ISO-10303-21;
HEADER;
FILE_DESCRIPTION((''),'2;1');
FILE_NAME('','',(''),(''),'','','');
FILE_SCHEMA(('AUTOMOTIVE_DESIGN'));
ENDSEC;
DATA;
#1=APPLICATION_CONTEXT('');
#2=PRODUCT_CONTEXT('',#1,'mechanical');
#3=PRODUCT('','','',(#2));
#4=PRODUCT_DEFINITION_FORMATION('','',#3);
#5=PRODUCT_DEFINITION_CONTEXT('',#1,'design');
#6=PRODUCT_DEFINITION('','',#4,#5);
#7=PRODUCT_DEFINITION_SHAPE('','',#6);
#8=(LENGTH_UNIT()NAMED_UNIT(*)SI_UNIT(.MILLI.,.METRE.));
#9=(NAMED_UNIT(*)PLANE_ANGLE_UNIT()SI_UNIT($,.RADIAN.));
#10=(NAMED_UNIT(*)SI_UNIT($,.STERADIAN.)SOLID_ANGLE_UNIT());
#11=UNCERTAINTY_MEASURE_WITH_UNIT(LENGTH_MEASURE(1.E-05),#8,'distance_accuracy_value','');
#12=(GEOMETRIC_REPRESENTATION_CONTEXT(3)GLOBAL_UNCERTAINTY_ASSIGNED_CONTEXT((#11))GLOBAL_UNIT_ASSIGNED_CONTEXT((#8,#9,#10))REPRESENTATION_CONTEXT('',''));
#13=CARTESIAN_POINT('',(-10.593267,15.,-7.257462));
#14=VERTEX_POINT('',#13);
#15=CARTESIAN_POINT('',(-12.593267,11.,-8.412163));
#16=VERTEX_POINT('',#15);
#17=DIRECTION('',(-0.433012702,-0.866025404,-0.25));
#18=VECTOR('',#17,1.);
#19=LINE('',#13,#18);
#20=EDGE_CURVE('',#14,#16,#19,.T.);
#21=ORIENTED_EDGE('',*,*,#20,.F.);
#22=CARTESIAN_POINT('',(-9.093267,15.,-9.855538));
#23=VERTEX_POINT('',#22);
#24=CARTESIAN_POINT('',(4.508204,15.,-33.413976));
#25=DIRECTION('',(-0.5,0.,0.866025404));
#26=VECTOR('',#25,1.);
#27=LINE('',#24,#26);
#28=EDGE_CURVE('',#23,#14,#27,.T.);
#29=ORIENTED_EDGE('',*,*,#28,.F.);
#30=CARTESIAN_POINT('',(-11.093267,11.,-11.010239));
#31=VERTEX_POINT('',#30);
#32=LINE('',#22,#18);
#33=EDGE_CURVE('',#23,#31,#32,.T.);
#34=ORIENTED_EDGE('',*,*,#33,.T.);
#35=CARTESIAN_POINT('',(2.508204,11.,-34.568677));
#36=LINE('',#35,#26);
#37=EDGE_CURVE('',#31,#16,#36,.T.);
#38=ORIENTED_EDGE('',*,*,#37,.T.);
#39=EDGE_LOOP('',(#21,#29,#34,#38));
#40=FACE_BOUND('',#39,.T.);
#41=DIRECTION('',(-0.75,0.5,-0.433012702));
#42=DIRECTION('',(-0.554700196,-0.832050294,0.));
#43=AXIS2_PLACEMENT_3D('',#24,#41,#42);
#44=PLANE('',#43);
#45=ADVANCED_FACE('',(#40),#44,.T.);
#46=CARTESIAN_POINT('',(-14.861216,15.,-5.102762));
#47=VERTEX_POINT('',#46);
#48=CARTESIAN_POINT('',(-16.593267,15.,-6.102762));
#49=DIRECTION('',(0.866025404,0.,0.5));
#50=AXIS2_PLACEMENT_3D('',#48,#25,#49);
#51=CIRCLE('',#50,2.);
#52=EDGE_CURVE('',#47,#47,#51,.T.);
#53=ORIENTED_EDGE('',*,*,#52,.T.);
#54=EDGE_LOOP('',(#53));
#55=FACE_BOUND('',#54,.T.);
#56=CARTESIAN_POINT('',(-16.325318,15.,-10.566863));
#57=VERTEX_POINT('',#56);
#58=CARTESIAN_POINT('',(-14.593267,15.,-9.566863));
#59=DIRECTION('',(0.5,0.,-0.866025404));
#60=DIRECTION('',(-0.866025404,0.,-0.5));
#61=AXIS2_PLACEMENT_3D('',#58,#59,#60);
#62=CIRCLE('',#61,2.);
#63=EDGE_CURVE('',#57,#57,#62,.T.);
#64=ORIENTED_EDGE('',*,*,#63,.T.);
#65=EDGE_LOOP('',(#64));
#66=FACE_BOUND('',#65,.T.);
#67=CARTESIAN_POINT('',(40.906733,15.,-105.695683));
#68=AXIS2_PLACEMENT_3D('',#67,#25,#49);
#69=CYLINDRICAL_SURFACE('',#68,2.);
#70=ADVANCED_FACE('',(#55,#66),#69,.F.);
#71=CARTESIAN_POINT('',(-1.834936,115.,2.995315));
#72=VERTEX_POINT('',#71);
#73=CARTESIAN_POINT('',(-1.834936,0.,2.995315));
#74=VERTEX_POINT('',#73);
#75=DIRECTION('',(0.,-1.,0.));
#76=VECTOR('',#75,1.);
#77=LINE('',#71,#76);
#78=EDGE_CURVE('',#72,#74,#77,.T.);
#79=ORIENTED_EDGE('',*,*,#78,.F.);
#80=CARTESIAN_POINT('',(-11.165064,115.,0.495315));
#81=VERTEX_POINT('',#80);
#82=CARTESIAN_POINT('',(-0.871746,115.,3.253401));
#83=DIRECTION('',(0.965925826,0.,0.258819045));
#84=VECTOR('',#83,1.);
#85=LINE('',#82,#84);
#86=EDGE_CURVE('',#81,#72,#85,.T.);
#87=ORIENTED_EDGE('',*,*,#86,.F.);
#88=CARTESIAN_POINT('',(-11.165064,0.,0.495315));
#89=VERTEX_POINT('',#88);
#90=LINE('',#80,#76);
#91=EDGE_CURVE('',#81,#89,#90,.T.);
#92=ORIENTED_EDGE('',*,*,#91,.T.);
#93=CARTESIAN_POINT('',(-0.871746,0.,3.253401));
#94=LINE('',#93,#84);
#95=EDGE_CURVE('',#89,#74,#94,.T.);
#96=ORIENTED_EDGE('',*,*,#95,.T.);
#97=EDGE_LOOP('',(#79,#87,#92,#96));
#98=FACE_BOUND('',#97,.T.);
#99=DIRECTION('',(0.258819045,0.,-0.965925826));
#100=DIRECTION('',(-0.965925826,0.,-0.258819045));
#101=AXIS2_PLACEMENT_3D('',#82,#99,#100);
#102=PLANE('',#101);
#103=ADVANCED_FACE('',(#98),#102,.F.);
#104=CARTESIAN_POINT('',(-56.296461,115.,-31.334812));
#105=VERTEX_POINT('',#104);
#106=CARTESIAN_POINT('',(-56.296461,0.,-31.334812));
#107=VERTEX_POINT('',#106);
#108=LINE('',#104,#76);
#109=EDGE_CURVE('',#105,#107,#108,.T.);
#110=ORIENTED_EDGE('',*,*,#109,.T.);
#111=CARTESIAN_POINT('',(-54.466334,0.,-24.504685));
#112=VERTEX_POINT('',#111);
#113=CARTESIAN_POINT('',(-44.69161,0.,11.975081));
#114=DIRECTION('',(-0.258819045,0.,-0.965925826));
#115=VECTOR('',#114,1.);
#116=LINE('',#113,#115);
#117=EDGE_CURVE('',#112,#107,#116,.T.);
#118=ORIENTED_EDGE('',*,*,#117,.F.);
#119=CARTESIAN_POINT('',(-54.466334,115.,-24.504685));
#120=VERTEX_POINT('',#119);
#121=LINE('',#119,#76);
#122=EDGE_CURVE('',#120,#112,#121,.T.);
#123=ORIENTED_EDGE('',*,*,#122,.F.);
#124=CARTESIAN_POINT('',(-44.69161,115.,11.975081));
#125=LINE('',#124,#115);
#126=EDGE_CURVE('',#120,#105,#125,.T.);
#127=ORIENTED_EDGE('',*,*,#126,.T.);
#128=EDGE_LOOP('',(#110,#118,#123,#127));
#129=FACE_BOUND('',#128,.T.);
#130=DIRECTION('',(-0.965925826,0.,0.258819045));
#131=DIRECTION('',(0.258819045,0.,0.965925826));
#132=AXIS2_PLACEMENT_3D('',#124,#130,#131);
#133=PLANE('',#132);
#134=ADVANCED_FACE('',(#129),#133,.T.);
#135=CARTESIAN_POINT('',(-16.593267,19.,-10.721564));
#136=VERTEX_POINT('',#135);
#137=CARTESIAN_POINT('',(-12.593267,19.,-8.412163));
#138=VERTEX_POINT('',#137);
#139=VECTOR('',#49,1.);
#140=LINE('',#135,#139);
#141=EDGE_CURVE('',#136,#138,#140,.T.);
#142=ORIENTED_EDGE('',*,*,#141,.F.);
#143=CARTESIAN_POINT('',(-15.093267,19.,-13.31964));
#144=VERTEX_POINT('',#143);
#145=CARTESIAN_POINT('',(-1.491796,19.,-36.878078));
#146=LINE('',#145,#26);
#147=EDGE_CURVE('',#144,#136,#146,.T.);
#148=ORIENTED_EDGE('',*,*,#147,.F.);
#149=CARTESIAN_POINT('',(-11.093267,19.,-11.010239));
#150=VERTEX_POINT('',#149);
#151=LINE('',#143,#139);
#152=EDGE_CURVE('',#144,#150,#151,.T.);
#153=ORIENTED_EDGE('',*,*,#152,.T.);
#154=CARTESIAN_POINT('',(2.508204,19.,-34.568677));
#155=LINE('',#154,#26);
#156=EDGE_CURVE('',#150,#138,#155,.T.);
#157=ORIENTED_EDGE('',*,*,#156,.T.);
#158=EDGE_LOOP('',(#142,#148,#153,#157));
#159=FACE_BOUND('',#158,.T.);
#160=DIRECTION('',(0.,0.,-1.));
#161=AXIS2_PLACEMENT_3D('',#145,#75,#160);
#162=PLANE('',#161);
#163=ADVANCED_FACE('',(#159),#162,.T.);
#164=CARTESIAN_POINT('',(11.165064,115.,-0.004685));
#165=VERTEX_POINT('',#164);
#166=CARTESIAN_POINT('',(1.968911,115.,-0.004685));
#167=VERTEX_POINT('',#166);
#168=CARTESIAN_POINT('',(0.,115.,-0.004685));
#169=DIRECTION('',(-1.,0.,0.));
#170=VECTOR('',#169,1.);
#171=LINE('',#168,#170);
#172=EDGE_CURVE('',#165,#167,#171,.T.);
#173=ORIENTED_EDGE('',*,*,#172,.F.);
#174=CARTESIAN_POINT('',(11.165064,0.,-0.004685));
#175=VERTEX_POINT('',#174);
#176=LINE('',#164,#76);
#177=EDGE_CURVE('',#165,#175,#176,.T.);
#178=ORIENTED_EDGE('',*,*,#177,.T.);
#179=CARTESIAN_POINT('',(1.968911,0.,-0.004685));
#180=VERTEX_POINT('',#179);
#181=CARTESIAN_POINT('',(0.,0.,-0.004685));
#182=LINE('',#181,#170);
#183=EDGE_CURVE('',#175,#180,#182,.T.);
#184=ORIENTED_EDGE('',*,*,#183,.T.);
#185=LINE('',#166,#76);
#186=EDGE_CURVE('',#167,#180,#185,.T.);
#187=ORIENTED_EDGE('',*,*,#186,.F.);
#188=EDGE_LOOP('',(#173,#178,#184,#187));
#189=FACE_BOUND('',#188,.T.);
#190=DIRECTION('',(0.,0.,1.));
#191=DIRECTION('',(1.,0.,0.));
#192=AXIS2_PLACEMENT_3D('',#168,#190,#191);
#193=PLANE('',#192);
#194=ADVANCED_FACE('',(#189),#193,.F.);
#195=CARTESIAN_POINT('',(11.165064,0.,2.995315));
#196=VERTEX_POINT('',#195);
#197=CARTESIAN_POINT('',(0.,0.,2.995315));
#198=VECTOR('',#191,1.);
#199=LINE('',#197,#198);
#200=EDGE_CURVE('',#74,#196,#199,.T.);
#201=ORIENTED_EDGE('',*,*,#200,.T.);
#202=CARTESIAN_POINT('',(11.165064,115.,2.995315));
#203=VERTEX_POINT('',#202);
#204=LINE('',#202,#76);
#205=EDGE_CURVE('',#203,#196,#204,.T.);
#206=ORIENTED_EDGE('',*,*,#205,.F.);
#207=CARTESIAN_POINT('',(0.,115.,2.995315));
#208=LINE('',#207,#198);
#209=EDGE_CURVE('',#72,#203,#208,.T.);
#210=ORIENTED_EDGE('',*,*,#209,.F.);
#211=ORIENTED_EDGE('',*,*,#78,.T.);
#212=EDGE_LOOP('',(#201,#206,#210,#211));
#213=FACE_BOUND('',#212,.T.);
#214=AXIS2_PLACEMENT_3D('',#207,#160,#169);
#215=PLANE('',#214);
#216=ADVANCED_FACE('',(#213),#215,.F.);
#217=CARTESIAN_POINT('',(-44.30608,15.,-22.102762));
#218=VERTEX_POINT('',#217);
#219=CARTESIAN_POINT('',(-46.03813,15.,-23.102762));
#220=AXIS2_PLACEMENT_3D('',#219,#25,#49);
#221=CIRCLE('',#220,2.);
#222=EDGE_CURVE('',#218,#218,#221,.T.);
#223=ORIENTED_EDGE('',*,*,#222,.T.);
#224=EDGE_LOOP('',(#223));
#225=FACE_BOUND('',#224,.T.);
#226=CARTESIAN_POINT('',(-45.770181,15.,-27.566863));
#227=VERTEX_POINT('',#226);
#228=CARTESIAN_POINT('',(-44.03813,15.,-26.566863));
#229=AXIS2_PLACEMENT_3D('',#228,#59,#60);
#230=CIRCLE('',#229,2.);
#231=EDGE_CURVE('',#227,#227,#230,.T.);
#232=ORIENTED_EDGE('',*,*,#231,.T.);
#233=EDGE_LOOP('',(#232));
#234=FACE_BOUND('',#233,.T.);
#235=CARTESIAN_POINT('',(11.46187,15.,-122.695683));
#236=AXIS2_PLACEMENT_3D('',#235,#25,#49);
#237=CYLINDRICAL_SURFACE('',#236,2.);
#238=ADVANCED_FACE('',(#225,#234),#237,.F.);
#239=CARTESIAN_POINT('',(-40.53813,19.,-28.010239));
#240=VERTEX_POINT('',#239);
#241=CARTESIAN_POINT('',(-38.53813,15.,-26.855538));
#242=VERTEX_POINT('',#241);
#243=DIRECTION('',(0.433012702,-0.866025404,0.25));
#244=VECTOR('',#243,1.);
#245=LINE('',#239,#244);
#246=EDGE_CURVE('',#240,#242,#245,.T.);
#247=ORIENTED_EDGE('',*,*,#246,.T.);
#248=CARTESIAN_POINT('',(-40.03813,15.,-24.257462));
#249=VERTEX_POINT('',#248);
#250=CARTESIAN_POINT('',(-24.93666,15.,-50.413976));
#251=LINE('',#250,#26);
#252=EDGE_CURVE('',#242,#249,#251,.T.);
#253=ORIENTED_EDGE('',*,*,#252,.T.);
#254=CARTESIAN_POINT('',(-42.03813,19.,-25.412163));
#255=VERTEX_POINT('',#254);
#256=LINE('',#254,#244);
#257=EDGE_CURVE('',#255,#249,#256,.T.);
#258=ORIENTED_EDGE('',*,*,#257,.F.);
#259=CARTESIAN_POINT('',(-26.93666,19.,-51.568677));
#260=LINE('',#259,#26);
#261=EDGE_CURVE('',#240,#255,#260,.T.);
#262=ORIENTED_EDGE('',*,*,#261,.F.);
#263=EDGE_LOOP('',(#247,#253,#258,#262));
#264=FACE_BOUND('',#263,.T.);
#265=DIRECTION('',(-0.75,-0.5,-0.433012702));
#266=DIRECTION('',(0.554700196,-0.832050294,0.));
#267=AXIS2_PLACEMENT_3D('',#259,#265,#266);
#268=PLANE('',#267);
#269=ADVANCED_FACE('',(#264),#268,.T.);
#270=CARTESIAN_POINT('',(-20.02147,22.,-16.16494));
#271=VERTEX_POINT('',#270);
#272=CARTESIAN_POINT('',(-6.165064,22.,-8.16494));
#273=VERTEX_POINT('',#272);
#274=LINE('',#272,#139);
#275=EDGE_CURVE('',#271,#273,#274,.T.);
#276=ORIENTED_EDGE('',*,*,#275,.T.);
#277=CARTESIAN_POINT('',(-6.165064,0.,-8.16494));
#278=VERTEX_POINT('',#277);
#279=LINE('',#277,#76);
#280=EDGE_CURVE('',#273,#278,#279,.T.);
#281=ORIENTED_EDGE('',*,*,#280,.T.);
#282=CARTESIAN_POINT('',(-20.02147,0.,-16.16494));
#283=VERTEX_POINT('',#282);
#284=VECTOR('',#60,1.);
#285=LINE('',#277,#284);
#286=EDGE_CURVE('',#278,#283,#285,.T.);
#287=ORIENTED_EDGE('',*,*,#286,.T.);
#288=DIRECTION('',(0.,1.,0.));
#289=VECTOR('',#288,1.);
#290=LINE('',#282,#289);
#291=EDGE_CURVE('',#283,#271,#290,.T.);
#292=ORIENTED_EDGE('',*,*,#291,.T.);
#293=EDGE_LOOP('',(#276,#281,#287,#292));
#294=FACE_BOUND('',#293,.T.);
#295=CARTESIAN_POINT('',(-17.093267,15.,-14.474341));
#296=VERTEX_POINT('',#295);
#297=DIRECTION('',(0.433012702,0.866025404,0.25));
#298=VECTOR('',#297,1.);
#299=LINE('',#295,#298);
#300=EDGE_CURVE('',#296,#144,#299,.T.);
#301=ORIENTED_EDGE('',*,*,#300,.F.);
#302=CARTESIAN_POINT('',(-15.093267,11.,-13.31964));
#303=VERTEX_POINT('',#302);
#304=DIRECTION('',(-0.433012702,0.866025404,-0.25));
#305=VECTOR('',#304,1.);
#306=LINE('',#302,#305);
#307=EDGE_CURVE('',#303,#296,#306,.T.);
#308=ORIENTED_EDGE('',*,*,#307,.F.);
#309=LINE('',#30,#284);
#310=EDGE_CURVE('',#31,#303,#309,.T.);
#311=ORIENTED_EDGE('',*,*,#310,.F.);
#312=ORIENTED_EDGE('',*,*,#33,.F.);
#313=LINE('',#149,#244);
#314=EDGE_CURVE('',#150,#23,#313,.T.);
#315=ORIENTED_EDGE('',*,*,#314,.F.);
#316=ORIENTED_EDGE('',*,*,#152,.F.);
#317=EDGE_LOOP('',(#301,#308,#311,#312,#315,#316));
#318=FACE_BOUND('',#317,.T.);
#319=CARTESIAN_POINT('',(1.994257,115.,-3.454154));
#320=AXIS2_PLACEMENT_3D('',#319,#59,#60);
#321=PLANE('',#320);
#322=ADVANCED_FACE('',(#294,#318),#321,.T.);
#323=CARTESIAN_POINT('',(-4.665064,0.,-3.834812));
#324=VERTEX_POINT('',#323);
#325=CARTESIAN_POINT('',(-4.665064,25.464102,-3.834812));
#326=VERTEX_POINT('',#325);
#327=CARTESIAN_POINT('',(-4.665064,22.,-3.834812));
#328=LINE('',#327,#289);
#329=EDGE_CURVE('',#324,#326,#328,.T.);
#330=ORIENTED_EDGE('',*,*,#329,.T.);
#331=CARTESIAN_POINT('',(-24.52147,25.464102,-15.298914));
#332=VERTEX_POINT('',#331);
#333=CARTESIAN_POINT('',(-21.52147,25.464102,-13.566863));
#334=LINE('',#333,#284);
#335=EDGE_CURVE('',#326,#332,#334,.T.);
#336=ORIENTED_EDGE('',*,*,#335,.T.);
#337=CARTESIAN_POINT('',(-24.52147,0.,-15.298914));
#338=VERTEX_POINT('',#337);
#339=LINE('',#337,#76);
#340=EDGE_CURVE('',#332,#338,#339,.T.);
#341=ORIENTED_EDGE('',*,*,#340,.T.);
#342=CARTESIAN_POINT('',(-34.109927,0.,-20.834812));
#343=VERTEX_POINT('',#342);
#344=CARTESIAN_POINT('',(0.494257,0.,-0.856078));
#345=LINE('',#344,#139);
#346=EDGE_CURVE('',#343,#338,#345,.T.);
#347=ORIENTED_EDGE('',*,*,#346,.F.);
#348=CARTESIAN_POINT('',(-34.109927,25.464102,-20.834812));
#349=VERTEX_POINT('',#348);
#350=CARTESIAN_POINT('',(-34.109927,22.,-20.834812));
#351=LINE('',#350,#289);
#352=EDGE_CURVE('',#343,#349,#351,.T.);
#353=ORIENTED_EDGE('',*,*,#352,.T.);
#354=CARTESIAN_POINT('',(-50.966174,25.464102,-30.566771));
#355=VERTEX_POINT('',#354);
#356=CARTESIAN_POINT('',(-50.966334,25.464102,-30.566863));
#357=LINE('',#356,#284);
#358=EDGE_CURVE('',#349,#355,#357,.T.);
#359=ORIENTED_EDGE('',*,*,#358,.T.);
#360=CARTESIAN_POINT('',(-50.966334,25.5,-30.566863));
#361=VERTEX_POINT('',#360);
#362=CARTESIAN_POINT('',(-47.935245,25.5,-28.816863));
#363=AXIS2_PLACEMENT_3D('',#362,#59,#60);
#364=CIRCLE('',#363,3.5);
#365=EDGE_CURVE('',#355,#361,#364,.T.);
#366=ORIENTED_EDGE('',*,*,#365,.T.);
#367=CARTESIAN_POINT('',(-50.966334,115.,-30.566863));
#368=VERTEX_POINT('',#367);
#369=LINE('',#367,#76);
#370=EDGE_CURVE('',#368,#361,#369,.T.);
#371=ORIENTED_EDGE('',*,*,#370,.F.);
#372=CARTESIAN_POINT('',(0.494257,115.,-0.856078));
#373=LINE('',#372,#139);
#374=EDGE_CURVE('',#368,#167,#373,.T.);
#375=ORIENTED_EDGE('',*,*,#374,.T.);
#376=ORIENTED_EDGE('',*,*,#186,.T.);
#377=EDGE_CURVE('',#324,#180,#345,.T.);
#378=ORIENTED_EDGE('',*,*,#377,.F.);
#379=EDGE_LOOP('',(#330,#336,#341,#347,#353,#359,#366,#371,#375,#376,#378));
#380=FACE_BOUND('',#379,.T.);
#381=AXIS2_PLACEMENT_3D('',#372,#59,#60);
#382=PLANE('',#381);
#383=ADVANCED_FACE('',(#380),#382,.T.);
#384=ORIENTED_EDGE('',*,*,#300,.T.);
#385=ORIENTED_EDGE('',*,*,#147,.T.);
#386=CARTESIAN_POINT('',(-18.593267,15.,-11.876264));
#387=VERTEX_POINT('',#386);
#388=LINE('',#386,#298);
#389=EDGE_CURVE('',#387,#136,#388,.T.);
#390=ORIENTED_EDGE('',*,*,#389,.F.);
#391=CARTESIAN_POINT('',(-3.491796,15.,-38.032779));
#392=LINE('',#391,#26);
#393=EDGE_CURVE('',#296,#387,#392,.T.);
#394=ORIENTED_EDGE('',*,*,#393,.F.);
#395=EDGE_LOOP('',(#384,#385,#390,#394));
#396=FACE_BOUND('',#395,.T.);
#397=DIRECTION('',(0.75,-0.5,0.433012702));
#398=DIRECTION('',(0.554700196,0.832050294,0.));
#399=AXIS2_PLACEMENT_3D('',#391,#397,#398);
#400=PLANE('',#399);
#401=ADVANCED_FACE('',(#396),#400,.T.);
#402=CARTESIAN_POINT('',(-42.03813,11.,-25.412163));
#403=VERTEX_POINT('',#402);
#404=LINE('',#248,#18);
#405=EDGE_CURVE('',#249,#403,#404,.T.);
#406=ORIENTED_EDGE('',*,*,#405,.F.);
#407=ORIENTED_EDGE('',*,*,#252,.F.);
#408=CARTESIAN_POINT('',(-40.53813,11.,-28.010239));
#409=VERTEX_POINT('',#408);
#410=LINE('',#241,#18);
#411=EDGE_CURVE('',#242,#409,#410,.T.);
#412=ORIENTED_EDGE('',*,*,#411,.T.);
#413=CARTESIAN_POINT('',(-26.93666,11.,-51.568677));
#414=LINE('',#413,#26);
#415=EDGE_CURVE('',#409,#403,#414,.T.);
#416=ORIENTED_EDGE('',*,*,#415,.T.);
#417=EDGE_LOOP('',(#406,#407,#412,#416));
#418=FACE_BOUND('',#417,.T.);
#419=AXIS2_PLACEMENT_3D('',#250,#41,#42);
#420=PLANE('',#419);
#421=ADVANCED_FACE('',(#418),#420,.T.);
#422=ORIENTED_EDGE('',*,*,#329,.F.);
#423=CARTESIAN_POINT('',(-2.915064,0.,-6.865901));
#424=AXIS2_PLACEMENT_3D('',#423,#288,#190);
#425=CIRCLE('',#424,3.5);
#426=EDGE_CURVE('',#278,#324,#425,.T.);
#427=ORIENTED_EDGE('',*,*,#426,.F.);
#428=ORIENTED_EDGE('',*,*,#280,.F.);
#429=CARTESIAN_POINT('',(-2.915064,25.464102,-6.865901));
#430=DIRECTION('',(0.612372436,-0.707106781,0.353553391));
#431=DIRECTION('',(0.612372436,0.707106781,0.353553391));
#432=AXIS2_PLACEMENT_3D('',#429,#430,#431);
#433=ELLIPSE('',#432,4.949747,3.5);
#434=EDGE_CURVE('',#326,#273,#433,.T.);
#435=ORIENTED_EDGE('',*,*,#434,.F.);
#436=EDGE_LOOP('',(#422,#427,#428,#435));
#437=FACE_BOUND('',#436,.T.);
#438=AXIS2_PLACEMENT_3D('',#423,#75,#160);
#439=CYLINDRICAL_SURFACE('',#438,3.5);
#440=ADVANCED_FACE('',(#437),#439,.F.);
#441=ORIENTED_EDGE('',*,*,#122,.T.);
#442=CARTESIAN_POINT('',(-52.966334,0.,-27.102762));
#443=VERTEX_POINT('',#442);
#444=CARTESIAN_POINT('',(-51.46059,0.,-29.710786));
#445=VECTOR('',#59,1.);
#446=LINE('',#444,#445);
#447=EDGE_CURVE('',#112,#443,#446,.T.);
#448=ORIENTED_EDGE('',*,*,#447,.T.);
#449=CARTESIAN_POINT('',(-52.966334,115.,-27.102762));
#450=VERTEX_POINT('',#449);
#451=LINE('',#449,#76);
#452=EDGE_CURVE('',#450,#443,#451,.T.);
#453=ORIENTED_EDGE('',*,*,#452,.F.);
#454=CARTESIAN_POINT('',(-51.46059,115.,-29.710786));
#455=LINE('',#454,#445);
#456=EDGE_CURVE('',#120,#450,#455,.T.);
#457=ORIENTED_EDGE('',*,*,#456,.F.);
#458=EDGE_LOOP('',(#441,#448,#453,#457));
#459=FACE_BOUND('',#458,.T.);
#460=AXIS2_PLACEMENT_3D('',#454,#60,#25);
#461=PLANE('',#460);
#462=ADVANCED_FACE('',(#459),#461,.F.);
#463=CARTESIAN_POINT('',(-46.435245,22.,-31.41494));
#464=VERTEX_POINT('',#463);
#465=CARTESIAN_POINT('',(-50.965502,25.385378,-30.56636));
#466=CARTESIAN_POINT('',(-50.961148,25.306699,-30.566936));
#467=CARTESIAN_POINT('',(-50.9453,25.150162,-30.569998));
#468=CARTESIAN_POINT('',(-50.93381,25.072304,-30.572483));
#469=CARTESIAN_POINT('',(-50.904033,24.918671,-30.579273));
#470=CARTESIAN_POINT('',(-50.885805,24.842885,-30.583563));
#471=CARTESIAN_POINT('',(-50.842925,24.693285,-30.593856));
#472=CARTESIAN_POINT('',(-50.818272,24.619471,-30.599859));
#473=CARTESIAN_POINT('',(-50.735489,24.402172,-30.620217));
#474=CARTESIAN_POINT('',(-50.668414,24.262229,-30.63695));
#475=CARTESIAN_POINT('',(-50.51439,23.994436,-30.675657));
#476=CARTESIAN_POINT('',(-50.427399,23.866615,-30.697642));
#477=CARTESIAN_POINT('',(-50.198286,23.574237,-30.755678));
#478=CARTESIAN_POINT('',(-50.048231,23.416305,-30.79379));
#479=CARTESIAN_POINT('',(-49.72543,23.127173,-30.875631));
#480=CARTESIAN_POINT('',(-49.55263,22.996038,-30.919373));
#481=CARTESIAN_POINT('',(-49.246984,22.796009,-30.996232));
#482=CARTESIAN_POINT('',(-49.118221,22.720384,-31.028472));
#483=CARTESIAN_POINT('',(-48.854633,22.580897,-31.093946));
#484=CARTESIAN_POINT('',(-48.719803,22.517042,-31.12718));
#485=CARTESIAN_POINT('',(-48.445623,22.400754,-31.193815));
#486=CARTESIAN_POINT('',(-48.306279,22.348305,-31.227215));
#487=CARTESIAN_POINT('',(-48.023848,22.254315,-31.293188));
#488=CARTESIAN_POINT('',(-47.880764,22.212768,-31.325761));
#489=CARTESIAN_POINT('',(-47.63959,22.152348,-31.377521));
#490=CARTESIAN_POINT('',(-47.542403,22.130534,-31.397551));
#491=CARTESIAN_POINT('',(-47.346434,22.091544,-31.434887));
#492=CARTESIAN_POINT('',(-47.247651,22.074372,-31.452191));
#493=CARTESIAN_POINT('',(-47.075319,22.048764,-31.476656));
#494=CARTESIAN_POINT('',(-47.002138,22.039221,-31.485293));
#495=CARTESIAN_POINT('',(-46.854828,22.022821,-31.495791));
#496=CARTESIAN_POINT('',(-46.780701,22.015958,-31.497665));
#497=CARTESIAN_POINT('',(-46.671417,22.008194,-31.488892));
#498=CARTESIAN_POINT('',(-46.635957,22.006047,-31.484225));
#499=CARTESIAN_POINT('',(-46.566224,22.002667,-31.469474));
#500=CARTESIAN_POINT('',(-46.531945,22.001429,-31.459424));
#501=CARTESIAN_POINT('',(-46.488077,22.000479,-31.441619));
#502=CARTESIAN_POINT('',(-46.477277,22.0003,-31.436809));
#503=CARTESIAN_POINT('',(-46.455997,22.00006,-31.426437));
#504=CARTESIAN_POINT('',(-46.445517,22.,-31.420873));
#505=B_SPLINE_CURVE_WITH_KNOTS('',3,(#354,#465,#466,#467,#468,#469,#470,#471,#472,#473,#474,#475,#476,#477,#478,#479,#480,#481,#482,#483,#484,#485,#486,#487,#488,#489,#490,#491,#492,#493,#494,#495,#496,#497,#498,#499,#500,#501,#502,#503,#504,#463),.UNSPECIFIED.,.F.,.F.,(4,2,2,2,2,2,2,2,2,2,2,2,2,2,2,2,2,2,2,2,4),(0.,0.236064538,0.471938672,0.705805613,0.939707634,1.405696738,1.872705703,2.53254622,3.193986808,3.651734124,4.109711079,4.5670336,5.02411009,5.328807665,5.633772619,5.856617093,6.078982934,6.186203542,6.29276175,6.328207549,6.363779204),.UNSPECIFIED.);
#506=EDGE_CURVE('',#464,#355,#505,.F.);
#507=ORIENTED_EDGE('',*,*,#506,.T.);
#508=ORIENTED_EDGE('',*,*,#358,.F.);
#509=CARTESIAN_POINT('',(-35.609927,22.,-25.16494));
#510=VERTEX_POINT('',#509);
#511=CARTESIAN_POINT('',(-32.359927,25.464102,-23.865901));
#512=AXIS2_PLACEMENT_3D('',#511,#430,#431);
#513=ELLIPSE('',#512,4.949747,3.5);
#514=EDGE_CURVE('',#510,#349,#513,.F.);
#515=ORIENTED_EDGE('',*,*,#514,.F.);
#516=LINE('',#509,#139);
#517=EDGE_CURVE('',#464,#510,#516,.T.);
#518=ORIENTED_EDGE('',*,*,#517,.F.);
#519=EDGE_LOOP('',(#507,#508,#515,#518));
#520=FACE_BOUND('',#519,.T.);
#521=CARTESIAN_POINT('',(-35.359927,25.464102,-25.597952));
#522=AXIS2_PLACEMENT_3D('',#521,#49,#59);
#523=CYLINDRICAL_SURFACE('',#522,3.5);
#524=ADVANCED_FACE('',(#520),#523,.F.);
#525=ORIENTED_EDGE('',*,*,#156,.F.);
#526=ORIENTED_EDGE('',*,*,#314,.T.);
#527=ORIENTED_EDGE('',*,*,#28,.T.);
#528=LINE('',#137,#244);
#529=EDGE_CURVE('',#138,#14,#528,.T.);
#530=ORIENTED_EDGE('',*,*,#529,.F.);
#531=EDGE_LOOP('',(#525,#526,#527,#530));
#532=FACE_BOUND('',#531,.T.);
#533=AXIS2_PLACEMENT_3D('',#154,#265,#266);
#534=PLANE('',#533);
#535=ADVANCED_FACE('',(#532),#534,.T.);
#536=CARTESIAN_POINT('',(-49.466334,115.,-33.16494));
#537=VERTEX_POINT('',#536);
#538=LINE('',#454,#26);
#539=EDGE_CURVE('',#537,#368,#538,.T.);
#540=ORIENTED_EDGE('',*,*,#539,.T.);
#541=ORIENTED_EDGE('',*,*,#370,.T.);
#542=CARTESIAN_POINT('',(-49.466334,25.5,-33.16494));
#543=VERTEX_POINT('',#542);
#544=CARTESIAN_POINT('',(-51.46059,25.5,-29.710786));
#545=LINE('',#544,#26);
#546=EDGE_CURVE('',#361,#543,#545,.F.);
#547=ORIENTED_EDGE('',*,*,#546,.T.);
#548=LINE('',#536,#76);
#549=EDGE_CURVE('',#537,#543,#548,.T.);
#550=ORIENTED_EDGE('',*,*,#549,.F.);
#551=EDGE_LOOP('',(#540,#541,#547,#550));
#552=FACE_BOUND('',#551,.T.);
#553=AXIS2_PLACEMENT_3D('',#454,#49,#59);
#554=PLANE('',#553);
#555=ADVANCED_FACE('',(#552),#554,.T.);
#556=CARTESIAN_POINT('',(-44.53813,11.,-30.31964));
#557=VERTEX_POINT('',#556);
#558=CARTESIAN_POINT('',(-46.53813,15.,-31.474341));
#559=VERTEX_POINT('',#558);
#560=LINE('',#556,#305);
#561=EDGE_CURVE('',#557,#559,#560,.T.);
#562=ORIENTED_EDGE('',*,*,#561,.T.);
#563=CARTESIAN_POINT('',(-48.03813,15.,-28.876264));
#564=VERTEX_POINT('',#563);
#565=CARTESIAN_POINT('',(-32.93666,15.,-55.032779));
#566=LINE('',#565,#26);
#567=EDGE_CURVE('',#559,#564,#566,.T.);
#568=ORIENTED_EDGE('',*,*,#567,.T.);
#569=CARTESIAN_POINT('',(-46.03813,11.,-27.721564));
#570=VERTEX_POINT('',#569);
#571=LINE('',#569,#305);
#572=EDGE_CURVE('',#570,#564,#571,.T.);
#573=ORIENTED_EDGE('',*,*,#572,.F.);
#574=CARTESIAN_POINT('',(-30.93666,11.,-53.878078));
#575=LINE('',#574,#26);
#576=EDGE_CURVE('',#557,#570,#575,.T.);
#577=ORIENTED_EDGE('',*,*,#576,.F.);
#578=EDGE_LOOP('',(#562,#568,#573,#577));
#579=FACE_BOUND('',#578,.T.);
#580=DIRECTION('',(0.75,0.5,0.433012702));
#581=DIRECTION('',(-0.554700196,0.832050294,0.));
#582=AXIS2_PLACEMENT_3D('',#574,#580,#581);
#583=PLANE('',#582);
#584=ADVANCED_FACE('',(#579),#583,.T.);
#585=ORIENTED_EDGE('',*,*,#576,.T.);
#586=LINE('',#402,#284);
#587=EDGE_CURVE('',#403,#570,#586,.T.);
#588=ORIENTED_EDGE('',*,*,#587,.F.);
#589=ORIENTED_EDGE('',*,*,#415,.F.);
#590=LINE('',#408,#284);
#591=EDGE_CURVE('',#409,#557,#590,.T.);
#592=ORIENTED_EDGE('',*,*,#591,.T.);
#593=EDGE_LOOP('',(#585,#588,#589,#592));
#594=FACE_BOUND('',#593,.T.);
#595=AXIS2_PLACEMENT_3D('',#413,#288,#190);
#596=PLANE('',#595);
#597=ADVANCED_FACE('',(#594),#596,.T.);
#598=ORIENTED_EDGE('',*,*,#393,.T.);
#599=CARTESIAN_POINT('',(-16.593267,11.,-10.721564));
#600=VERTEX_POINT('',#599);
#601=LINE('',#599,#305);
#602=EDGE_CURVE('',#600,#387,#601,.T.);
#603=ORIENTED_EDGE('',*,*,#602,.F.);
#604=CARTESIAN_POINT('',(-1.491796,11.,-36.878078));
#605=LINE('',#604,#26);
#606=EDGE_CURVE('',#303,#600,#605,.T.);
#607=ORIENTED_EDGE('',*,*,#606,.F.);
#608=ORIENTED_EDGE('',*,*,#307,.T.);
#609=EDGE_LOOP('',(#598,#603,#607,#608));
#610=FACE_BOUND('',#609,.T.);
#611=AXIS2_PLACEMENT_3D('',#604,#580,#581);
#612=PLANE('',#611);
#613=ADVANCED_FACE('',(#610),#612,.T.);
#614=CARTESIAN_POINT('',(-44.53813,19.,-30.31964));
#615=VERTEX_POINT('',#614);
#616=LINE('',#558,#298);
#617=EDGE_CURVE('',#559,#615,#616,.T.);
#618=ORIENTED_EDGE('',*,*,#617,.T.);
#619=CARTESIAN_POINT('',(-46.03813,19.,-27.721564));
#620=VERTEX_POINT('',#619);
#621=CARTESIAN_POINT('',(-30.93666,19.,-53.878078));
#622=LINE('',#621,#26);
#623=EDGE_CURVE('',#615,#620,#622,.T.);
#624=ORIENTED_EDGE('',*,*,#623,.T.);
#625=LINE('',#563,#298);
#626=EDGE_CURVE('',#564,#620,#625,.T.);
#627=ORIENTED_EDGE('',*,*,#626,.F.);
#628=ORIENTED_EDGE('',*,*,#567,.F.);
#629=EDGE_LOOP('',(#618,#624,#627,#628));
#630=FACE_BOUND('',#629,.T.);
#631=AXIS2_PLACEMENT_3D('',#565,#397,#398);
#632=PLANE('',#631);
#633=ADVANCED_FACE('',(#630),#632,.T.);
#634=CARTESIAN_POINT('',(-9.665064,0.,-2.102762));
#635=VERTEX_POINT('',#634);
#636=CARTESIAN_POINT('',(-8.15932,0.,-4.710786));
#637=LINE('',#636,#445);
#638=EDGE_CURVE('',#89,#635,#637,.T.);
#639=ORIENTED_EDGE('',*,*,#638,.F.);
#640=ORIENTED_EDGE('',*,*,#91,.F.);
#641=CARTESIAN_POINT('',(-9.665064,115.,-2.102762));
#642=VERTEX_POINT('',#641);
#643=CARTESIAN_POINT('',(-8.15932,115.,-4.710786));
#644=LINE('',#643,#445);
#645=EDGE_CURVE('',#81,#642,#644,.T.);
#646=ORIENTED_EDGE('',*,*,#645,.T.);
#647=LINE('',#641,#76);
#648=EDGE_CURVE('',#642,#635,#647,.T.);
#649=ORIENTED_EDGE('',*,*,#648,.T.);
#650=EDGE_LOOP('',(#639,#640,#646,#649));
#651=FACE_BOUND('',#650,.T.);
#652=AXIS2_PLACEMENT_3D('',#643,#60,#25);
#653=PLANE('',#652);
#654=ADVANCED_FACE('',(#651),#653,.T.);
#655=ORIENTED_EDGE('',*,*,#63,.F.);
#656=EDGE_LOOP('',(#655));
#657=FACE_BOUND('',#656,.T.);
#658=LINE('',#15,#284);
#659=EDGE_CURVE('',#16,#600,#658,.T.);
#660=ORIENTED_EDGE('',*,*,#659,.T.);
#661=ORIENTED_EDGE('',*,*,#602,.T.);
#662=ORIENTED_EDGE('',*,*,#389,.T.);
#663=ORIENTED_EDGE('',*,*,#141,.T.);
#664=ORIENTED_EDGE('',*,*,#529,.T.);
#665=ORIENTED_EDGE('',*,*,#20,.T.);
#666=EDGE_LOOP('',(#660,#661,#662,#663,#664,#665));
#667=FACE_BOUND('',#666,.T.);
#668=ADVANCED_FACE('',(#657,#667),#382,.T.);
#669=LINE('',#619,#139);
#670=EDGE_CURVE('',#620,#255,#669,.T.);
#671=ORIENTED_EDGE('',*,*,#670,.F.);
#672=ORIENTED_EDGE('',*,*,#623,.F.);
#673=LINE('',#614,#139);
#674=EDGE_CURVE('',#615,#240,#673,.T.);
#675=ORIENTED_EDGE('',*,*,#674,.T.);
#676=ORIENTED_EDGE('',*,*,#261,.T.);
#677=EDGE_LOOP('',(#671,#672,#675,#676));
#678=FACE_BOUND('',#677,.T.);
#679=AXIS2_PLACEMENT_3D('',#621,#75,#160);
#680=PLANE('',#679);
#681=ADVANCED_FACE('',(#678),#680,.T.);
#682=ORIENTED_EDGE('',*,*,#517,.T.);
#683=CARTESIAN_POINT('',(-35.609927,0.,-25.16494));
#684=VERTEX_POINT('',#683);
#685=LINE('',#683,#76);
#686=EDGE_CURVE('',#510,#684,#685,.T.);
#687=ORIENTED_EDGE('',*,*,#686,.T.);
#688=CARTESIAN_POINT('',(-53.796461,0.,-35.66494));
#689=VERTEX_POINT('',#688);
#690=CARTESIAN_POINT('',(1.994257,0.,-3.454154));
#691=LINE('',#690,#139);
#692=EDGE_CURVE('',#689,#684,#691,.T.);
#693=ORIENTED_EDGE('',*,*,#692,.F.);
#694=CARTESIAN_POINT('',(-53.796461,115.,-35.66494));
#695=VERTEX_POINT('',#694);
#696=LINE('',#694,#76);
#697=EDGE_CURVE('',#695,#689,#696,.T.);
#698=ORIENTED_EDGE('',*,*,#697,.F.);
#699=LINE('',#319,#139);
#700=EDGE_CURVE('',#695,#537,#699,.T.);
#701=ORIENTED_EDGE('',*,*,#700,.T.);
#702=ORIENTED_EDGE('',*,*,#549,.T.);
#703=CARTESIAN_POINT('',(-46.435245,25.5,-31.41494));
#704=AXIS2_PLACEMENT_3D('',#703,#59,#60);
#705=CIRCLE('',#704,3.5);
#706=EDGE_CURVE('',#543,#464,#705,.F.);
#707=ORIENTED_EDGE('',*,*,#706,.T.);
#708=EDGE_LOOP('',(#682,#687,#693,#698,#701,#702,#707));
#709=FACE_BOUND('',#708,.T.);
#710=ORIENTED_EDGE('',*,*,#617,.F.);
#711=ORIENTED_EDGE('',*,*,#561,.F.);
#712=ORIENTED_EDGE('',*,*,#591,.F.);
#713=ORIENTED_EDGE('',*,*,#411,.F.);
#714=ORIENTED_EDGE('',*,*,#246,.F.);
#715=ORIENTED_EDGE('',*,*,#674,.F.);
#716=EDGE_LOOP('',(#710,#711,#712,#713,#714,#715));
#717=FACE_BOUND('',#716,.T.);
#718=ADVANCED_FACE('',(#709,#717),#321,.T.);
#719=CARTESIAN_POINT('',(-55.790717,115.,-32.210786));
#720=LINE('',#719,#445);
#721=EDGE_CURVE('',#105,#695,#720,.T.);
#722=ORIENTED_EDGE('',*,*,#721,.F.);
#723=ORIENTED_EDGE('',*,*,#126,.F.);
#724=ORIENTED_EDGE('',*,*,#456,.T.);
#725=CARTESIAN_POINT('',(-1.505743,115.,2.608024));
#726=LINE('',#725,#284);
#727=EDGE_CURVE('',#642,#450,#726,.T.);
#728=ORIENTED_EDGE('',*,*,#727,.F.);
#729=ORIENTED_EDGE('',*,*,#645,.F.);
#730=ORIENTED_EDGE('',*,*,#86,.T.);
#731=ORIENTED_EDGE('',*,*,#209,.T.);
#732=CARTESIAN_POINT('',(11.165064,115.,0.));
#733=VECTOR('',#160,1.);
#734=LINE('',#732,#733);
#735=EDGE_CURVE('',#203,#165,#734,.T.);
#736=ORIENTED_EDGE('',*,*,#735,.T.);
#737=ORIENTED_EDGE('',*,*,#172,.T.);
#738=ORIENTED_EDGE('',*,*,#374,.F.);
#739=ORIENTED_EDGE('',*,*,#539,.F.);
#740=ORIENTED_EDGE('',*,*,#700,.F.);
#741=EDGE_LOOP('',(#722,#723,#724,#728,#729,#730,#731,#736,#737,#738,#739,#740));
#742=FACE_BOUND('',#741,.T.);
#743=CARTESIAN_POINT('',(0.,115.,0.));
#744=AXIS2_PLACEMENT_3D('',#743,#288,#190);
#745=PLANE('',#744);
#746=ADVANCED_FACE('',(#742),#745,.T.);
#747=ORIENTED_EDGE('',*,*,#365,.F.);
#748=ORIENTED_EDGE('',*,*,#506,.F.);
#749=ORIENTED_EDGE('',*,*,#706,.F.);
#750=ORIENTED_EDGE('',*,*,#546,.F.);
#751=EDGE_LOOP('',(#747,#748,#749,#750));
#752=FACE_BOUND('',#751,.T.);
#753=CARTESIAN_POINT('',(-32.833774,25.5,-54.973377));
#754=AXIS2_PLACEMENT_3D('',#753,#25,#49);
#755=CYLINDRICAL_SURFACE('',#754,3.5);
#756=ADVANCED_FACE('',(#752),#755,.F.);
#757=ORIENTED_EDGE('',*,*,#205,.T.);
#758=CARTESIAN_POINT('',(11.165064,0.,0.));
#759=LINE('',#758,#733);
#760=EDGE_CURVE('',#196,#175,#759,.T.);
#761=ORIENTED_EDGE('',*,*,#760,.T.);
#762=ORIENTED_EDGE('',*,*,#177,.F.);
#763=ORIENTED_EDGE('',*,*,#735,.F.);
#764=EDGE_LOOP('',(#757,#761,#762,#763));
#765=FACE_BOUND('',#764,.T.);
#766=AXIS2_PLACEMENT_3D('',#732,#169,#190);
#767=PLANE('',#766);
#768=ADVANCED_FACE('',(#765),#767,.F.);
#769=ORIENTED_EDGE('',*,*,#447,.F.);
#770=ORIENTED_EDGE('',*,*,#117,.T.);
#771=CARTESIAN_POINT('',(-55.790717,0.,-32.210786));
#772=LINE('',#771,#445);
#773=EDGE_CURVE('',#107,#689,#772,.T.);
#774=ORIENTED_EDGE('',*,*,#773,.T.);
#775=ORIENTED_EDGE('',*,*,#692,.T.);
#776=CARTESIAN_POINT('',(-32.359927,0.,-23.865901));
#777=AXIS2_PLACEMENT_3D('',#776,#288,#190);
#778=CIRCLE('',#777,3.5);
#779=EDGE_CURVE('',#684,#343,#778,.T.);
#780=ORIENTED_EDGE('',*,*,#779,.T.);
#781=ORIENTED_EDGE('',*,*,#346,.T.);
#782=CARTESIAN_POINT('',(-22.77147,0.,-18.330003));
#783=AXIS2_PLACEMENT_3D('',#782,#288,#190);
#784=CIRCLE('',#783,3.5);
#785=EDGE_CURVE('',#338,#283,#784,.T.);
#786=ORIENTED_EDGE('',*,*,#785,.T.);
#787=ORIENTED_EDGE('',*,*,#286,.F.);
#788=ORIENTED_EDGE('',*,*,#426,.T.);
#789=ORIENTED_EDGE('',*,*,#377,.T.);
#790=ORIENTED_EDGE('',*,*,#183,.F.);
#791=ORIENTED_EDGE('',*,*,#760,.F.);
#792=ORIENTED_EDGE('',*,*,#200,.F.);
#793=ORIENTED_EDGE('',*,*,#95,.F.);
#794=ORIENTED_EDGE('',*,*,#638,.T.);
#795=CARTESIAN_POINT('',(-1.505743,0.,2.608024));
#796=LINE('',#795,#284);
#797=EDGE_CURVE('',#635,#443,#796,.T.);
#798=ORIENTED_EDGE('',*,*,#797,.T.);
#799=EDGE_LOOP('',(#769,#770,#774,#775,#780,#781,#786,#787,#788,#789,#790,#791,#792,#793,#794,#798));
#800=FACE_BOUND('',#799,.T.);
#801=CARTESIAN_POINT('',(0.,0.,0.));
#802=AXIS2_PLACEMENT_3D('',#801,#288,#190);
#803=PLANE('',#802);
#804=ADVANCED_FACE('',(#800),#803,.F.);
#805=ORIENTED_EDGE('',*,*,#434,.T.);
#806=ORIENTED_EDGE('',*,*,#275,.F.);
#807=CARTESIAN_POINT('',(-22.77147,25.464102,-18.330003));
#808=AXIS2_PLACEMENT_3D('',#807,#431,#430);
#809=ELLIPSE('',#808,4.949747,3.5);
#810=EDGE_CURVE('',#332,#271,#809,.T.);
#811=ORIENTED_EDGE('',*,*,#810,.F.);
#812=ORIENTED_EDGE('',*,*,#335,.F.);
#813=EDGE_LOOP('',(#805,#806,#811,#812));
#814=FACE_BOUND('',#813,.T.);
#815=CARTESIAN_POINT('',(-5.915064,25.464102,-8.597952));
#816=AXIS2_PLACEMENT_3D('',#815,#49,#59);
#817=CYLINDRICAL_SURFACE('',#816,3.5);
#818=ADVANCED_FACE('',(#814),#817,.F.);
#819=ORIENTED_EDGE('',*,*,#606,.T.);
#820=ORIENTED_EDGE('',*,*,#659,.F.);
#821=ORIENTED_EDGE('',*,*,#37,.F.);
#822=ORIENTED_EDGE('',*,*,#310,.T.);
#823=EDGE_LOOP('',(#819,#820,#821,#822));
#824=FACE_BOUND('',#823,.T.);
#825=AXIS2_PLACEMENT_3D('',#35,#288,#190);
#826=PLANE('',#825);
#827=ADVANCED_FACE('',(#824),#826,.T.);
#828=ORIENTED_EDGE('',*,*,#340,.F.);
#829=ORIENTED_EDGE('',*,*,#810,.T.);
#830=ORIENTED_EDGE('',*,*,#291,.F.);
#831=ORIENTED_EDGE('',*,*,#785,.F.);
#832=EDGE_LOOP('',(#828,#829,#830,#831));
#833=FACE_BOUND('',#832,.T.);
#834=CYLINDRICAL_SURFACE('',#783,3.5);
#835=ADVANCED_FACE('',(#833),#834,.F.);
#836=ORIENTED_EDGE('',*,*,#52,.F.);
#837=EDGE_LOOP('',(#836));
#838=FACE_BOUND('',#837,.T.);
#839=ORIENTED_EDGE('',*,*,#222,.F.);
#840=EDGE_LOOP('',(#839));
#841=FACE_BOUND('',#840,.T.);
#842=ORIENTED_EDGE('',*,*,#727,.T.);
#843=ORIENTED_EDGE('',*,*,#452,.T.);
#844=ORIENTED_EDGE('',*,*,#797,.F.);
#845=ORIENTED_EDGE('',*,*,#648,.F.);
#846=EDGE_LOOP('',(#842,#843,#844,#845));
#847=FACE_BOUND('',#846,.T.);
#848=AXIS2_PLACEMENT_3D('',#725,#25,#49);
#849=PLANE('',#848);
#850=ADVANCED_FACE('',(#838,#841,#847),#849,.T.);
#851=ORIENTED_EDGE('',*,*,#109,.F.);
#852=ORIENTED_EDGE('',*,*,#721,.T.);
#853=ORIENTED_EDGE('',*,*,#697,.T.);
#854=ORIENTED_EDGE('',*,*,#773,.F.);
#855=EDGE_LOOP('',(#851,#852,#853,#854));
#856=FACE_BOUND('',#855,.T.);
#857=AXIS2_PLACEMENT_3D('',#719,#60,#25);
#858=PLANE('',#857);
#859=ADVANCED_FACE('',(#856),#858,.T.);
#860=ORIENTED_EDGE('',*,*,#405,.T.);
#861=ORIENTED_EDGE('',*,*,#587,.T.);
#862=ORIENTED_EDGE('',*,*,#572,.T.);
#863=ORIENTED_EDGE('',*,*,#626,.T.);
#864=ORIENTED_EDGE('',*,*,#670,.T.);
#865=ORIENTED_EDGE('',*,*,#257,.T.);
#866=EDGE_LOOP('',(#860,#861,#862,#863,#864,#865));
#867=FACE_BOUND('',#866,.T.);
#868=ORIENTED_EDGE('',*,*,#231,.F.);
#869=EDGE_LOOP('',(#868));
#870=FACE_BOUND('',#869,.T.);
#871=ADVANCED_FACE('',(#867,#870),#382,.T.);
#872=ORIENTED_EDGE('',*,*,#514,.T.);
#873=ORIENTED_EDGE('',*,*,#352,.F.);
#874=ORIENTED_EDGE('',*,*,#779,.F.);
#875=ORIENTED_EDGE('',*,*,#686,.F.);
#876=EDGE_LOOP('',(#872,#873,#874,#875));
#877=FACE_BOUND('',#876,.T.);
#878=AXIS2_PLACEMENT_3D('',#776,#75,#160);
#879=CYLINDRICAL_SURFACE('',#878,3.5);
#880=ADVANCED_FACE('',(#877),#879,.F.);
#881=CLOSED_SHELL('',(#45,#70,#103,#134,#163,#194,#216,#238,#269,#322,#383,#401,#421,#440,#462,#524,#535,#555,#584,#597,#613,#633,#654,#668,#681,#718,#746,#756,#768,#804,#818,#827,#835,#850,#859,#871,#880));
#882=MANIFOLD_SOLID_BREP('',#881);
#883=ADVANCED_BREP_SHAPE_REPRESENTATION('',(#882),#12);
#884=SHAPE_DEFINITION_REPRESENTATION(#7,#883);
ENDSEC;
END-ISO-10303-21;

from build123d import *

# Parameters (mm, degrees)
BOSS_EXTRU_1_DEPTH      = 115
ESQUISSE3_R             = 2.0000000000000027
ESQUISSE3_R_2           = 2.0000000000000036
ENL_V_MAT_EXTRU_1_DEPTH = 115
ESQUISSE4_W             = 16
ESQUISSE4_H             = 22
BOSS_EXTRU_2_DEPTH      = 3
CONG_1_R                = 3.5


with BuildPart() as part:
    # Esquisse1 → Boss.-Extru.1 (new body)
    with BuildSketch(Plane(origin=(0, 0, 0), x_dir=(1, 0, 0), z_dir=(0, 1, 0))):
        Polygon((-9.665063509740824, 2.102761677791812), (-11.16506350974071, -0.4953145335614556), (-1.834936490818464, -2.99531453356143), (11.165063509180728, -2.9953145335603057), (11.165063509180731, 0.00468546643886736), (1.9689110864743, 0.00468546643886637), (-7.660052187463922, 5.563970004664114), (-50.96633369896256, 30.56686329292954), (-49.46633369896244, 33.164939504283076), (-53.79646071788463, 35.664939504283076), (-55.29646071788474, 33.06686329292953), (-56.29646071788462, 31.334812485360874), (-54.466333698962515, 24.504685466438406), (-52.96633369896275, 27.10276167779183), align=None)
    extrude(amount=BOSS_EXTRU_1_DEPTH)

    # Esquisse3 → Enlèv. mat.-Extru.1 (cut)
    with BuildSketch(Plane(origin=(-1.5057433618991607, 0, 2.6080240059689155), x_dir=(0.8660254037844384, 0, 0.5000000000000006), z_dir=(-0.5000000000000006, 0, 0.8660254037844385))):
        with Locations((-51.421571367521196, 15)):
            Circle(ESQUISSE3_R)
        with Locations((-17.42157136752137, 15)):
            Circle(ESQUISSE3_R_2)
    extrude(amount=-ENL_V_MAT_EXTRU_1_DEPTH, mode=Mode.SUBTRACT)

    # Esquisse4 → Boss.-Extru.2 (add)
    # profile 1 of 2: a face of its own
    with BuildSketch(Plane(origin=(0.4942566381008935, 0, -0.8560776091689317), x_dir=(-0.8660254037844388, 0, -0.49999999999999983), z_dir=(0.4999999999999998, 0, -0.8660254037844387))):
        with Locations((17.42157136752138, 11)):
            Rectangle(ESQUISSE4_W, ESQUISSE4_H)
        Polygon((19.73097244427988, 11.000000000000002), (22.040373521038383, 14.999999999999996), (19.730972444279878, 18.999999999999996), (15.112170290762874, 18.999999999999996), (12.802769214004368, 14.999999999999996), (15.112170290762867, 11.000000000000002), align=None, mode=Mode.SUBTRACT)
    # profile 2 of 2: a face of its own
    with BuildSketch(Plane(origin=(0.4942566381008935, 0, -0.8560776091689317), x_dir=(-0.8660254037844388, 0, -0.49999999999999983), z_dir=(0.4999999999999998, 0, -0.8660254037844387))):
        Polygon((43.42157136752119, 0), (59.42157136752126, 0), (59.42157136752126, 22.000000000000007), (43.42157136752119, 22), align=None)
        Polygon((49.11217029076269, 10.999999999999996), (53.73097244427969, 10.999999999999996), (56.0403735210382, 14.999999999999993), (53.7309724442797, 18.999999999999982), (49.11217029076269, 18.999999999999982), (46.80276921400419, 14.999999999999998), align=None, mode=Mode.SUBTRACT)
    extrude(amount=BOSS_EXTRU_2_DEPTH)

    # Congé1
    # the kernel refuses this fillet: 3.5 mm, written as the material it adds along each edge
    with BuildSketch(Plane(origin=(-21.521469970291736, 0, -13.566863292929616), x_dir=(-0.8660254037844398, 0, -0.499999999999998), z_dir=(0, 1, 0))) as cong_1_piece_1:
        with BuildLine():
            CenterArc((3.464101615137791, -3.4999999999999996), CONG_1_R, 89.99999999999986, 81.78678929826208)
            Line((3.411e-14, -3.000000000000007), (-0.06928203230272056, -2.990000000000007))
            ThreePointArc((-0.06928203230272056, -2.990000000000007), (-0.0700000000000017, -1.5000000000000009), (-0.06999999999999917, 8.1e-16))
            Line((-0.06999999999999917, 8.1e-16), (-8e-17, 0.07000000000000071))
            Line((-8e-17, 0.07000000000000071), (3.464101615137799, 0.0700000000000007))
            Line((3.464101615137799, 0.0700000000000007), (3.4641016151377992, -8e-17))
        make_face()
    extrude(amount=22)
    with BuildSketch(Plane(origin=(-7.665063509740717, 22, -5.56686329292962), x_dir=(0.8660254037844386, 0, 0.5000000000000001), z_dir=(0, -1, 0))) as cong_1_piece_2:
        with BuildLine():
            CenterArc((3.4641016151377975, -3.5), CONG_1_R, 89.99999999999999, 81.78678929826192)
            Line((4.212e-14, -3.000000000000006), (-0.06928203230271353, -2.9900000000000064))
            ThreePointArc((-0.06928203230271353, -2.9900000000000064), (-0.07000000000000044, -1.5000000000000042), (-0.06999999999999994, -1.9e-16))
            Line((-0.06999999999999994, -1.9e-16), (-1.9e-16, 0.06999999999999994))
            Line((-1.9e-16, 0.06999999999999994), (3.464101615137799, 0.07000000000000006))
            Line((3.464101615137799, 0.07000000000000006), (3.464101615137799, -1e-16))
        make_face()
    extrude(amount=22)
    with BuildSketch(Plane(origin=(-21.521469970291736, 22, -13.566863292929616), x_dir=(-7e-16, 1, 1.21e-15), z_dir=(0.8660254037844388, 0, 0.49999999999999983))) as cong_1_piece_3:
        with BuildLine():
            CenterArc((3.4641016151377912, -3.5), CONG_1_R, 89.99999999999993, 81.78678929826201)
            Line((3.488e-14, -3.0000000000000067), (-0.06928203230272052, -2.990000000000006))
            ThreePointArc((-0.06928203230272052, -2.990000000000006), (-0.0700000000000024, -1.500000000000003), (-0.07000000000000028, 3.4e-16))
            Line((-0.07000000000000028, 3.4e-16), (1e-16, 0.07000000000000095))
            Line((1e-16, 0.07000000000000095), (3.464101615137796, 0.07000000000000071))
            Line((3.464101615137796, 0.07000000000000071), (3.464101615137796, 0))
        make_face()
    extrude(amount=16)
    with BuildSketch(Plane(origin=(-37.10992723841147, 22, -22.56686329292952), x_dir=(0.5000000000000127, 0, -0.8660254037844313), z_dir=(0, -1, 0))) as cong_1_piece_4:
        with BuildLine():
            CenterArc((3.5000000000000466, 3.464101615137746), CONG_1_R, 179.99999999999915, 81.78678929826202)
            Line((4.591e-14, 3.464101615137798), (-0.06999999999995148, 3.4641016151378015))
            Line((-0.06999999999995148, 3.4641016151378015), (-0.06999999999999738, 3.46e-15))
            Line((-0.06999999999999738, 3.46e-15), (-3.8e-16, -0.06999999999999916))
            ThreePointArc((-3.8e-16, -0.06999999999999916), (1.5000000000000058, -0.07000000000002472), (2.9900000000000095, -0.06928203230275311))
            Line((2.9900000000000095, -0.06928203230275311), (3.000000000000009, -2e-17))
        make_face()
    extrude(amount=22)
    with BuildSketch(Plane(origin=(-50.96633369896256, 22.000000000000007, -30.56686329292955), x_dir=(0.4999999999999998, 1.3026616822268463e-14, -0.8660254037844388), z_dir=(0.8660254037844388, 0, 0.49999999999999983))) as cong_1_piece_5:
        with BuildLine():
            CenterArc((3.5000000000000306, 3.4641016151377513), CONG_1_R, 179.99999999999926, 81.78678929826219)
            Line((2.927e-14, 3.464101615137797), (-0.06999999999996813, 3.464101615137798))
            Line((-0.06999999999996813, 3.464101615137798), (-0.06999999999999787, 9.1e-16))
            Line((-0.06999999999999787, 9.1e-16), (2.16e-15, -0.0700000000000003))
            ThreePointArc((2.16e-15, -0.0700000000000003), (1.5000000000000022, -0.07000000000001984), (2.990000000000009, -0.0692820323027553))
            Line((2.990000000000009, -0.0692820323027553), (3.0000000000000093, 0))
        make_face()
    extrude(amount=16.000000000000075)
    with BuildSketch(Plane(origin=(-50.96633369896256, 22.000000000000007, -30.56686329292955), x_dir=(0.8660254037844387, 0, 0.49999999999999983), z_dir=(0.49999999999999983, 0, -0.8660254037844388))) as cong_1_piece_6:
        with BuildLine():
            CenterArc((CONG_1_R, -CONG_1_R), CONG_1_R, 90, 90)
            Line((-1.78e-15, -CONG_1_R), (-CONG_1_R * 0.02, -CONG_1_R))
            Line((-CONG_1_R * 0.02, -CONG_1_R), (-CONG_1_R * 0.02, CONG_1_R * 0.02))
            Line((-CONG_1_R * 0.02, CONG_1_R * 0.02), (CONG_1_R, CONG_1_R * 0.02))
            Line((CONG_1_R, CONG_1_R * 0.02), (CONG_1_R, 0))
        make_face()
    extrude(amount=3.0000000000000036)
    with BuildSketch(Plane(origin=(-29.02146997029182, 22, -17.89699031185185), x_dir=(0, 1, 0), z_dir=(0.8660254037844388, 0, 0.49999999999999983))) as cong_1_piece_7a_section:
        with BuildLine():
            CenterArc((3.4641016151377926, -3.5000000000000013), CONG_1_R, 90, 81.78678929826191)
            Line((3.553e-14, -3.000000000000007), (-0.0692820323027199, -2.9900000000000064))
            ThreePointArc((-0.0692820323027199, -2.9900000000000064), (-0.07000000000000028, -1.500000000000002), (-0.07000000000000028, 0))
            Line((-0.07000000000000028, 0), (0, 0.0699999999999974))
            Line((0, 0.0699999999999974), (3.4641016151377926, 0.06999999999999917))
            Line((3.4641016151377926, 0.06999999999999917), (3.4641016151377926, 0))
        make_face()
    cong_1_piece_7a = extrude(amount=24.660254037844485, mode=Mode.PRIVATE)
    cong_1_piece_7a = split(cong_1_piece_7a, bisect_by=Plane(origin=(-21.154506205499796, 22.800005921132424, -14.202463178086015), z_dir=(-0.8660254037844388, 0, -0.49999999999999983)), keep=Keep.TOP, mode=Mode.PRIVATE)
    with BuildSketch(Plane(origin=(-21.521469970291736, 0, -13.566863292929616), x_dir=(-0.8660254037844398, 0, -0.499999999999998), z_dir=(0, 1, 0))) as cong_1_piece_7b_section:
        with BuildLine():
            CenterArc((3.464101615137791, -3.4999999999999996), CONG_1_R, 89.99999999999986, 81.78678929826208)
            Line((3.411e-14, -3.000000000000007), (-0.06928203230272056, -2.990000000000007))
            ThreePointArc((-0.06928203230272056, -2.990000000000007), (-0.0700000000000017, -1.5000000000000009), (-0.06999999999999917, 8.1e-16))
            Line((-0.06999999999999917, 8.1e-16), (-8e-17, 0.07000000000000071))
            Line((-8e-17, 0.07000000000000071), (3.464101615137799, 0.0700000000000007))
            Line((3.464101615137799, 0.0700000000000007), (3.4641016151377992, -8e-17))
        make_face()
    cong_1_piece_7b = extrude(amount=30.660254037844496, mode=Mode.PRIVATE)
    cong_1_piece_7b = split(cong_1_piece_7b, bisect_by=Plane(origin=(-21.84733165637773, 22, -14.602466138652442), z_dir=(0, 1, 0)), keep=Keep.TOP, mode=Mode.PRIVATE)
    cong_1_piece_7 = cong_1_piece_7a & cong_1_piece_7b
    add(cong_1_piece_7)
    with BuildSketch(Plane(origin=(-7.665063509740719, 30.660254037844496, -5.566863292929618), x_dir=(0.8660254037844389, 0, 0.4999999999999995), z_dir=(0, -1, 0))) as cong_1_piece_8a_section:
        with BuildLine():
            CenterArc((3.4641016151378006, -3.5), CONG_1_R, 90.00000000000001, 81.78678929826195)
            Line((4.504e-14, -3.0000000000000084), (-0.06928203230271082, -2.990000000000009))
            ThreePointArc((-0.06928203230271082, -2.990000000000009), (-0.06999999999999906, -1.5000000000000056), (-0.06999999999999994, -2.4e-16))
            Line((-0.06999999999999994, -2.4e-16), (-2.4e-16, 0.06999999999999994))
            Line((-2.4e-16, 0.06999999999999994), (3.4641016151377992, 0.07))
            Line((3.4641016151377992, 0.07), (3.4641016151377997, 5e-17))
        make_face()
    cong_1_piece_8a = extrude(amount=30.660254037844496, mode=Mode.PRIVATE)
    cong_1_piece_8a = split(cong_1_piece_8a, bisect_by=Plane(origin=(-6.605274294070357, 22, -5.802460217520097), z_dir=(0, 1, 0)), keep=Keep.TOP, mode=Mode.PRIVATE)
    with BuildSketch(Plane(origin=(-21.521469970291736, 22, -13.566863292929616), x_dir=(-7e-16, 1, 1.21e-15), z_dir=(0.8660254037844388, 0, 0.49999999999999983))) as cong_1_piece_8b_section:
        with BuildLine():
            CenterArc((3.4641016151377912, -3.5), CONG_1_R, 89.99999999999993, 81.78678929826201)
            Line((3.488e-14, -3.0000000000000067), (-0.06928203230272052, -2.990000000000006))
            ThreePointArc((-0.06928203230272052, -2.990000000000006), (-0.0700000000000024, -1.500000000000003), (-0.07000000000000028, 3.4e-16))
            Line((-0.07000000000000028, 3.4e-16), (1e-16, 0.07000000000000095))
            Line((1e-16, 0.07000000000000095), (3.464101615137796, 0.07000000000000071))
            Line((3.464101615137796, 0.07000000000000071), (3.464101615137796, 0))
        make_face()
    cong_1_piece_8b = extrude(amount=24.66025403784449, mode=Mode.PRIVATE)
    cong_1_piece_8b = split(cong_1_piece_8b, bisect_by=Plane(origin=(-7.298099744948748, 22.800005921132424, -6.202463178086066), z_dir=(0.8660254037844388, 0, 0.49999999999999983)), keep=Keep.TOP, mode=Mode.PRIVATE)
    cong_1_piece_8 = cong_1_piece_8a & cong_1_piece_8b
    add(cong_1_piece_8)
    with BuildSketch(Plane(origin=(-50.96633369896256, 22.000000000000007, -30.56686329292955), x_dir=(0.4999999999999998, 1.3026616822268463e-14, -0.8660254037844388), z_dir=(0.8660254037844388, 0, 0.49999999999999983))) as cong_1_piece_9a_section:
        with BuildLine():
            CenterArc((3.5000000000000306, 3.4641016151377513), CONG_1_R, 179.99999999999926, 81.78678929826219)
            Line((2.927e-14, 3.464101615137797), (-0.06999999999996813, 3.464101615137798))
            Line((-0.06999999999996813, 3.464101615137798), (-0.06999999999999787, 9.1e-16))
            Line((-0.06999999999999787, 9.1e-16), (2.16e-15, -0.0700000000000003))
            ThreePointArc((2.16e-15, -0.0700000000000003), (1.5000000000000022, -0.07000000000001984), (2.990000000000009, -0.0692820323027553))
            Line((2.990000000000009, -0.0692820323027553), (3.0000000000000093, 0))
        make_face()
    cong_1_piece_9a = extrude(amount=24.660254037844567, mode=Mode.PRIVATE)
    cong_1_piece_9a = split(cong_1_piece_9a, bisect_by=Plane(origin=(-36.742963473619156, 22.800005921131838, -23.202463178086564), z_dir=(0.8660254037844388, 0, 0.49999999999999983)), keep=Keep.TOP, mode=Mode.PRIVATE)
    with BuildSketch(Plane(origin=(-37.10992723841147, 30.660254037844496, -22.56686329292951), x_dir=(0.5000000000000099, 0, -0.8660254037844329), z_dir=(0, -1, 0))) as cong_1_piece_9b_section:
        with BuildLine():
            CenterArc((3.5000000000000386, 3.4641016151377477), CONG_1_R, 179.99999999999935, 81.78678929826202)
            Line((3.741e-14, 3.464101615137789), (-0.06999999999996008, 3.464101615137792))
            Line((-0.06999999999996008, 3.464101615137792), (-0.0699999999999974, 3.23e-15))
            Line((-0.0699999999999974, 3.23e-15), (-1.6e-16, -0.06999999999999917))
            ThreePointArc((-1.6e-16, -0.06999999999999917), (1.500000000000006, -0.07000000000001991), (2.9900000000000126, -0.06928203230275315))
            Line((2.9900000000000126, -0.06928203230275315), (3.0000000000000115, 9e-17))
        make_face()
    cong_1_piece_9b = extrude(amount=30.660254037844496, mode=Mode.PRIVATE)
    cong_1_piece_9b = split(cong_1_piece_9b, bisect_by=Plane(origin=(-36.05013802274124, 22, -22.80246021752022), z_dir=(3.8e-16, 1, 2.2e-16)), keep=Keep.TOP, mode=Mode.PRIVATE)
    cong_1_piece_9 = cong_1_piece_9a & cong_1_piece_9b
    add(cong_1_piece_9)
    with BuildSketch(Plane(origin=(-55.34133369896255, 22.000000000000007, -22.989141009815718), x_dir=(0.8660254037844387, 0, 0.49999999999999983), z_dir=(0.49999999999999983, 0, -0.8660254037844388))) as cong_1_piece_10a_section:
        with BuildLine():
            CenterArc((CONG_1_R, -CONG_1_R), CONG_1_R, 90, 90)
            Line((-7.93e-15, -CONG_1_R), (-CONG_1_R * 0.02, -CONG_1_R))
            Line((-CONG_1_R * 0.02, -CONG_1_R), (-CONG_1_R * 0.02, CONG_1_R * 0.02))
            Line((-CONG_1_R * 0.02, CONG_1_R * 0.02), (CONG_1_R, CONG_1_R * 0.02))
            Line((CONG_1_R, CONG_1_R * 0.02), (CONG_1_R, 0))
        make_face()
    cong_1_piece_10a = extrude(amount=11.749999999999995, mode=Mode.PRIVATE)
    cong_1_piece_10a = split(cong_1_piece_10a, bisect_by=Plane(origin=(-50.280109978095446, 22.79238289993389, -30.170671842962605), z_dir=(-0.49999999999999967, 0, 0.8660254037844389)), keep=Keep.TOP, mode=Mode.PRIVATE)
    with BuildSketch(Plane(origin=(-58.46633369896265, 22.00000000000001, -34.89699031185178), x_dir=(0.4999999999999998, 1.3026616822268407e-14, -0.8660254037844388), z_dir=(0.8660254037844388, 0, 0.49999999999999983))) as cong_1_piece_10b_section:
        with BuildLine():
            CenterArc((3.500000000000043, 3.4641016151377513), CONG_1_R, 179.99999999999926, 81.78678929826219)
            Line((4.513e-14, 3.464101615137797), (-0.06999999999995227, 3.464101615137798))
            Line((-0.06999999999995227, 3.464101615137798), (-0.0699999999999974, 9.1e-16))
            Line((-0.0699999999999974, 9.1e-16), (-9.1e-16, -0.0700000000000003))
            ThreePointArc((-9.1e-16, -0.0700000000000003), (1.5000000000000213, -0.07000000000001984), (2.990000000000022, -0.0692820323027553))
            Line((2.990000000000022, -0.0692820323027553), (3.000000000000022, 0))
        make_face()
    cong_1_piece_10b = extrude(amount=24.66025403784456, mode=Mode.PRIVATE)
    cong_1_piece_10b = split(cong_1_piece_10b, bisect_by=Plane(origin=(-50.59936993417017, 22.80000592113141, -31.202463178086727), z_dir=(-0.8660254037844386, 0, -0.5000000000000002)), keep=Keep.TOP, mode=Mode.PRIVATE)
    cong_1_piece_10 = cong_1_piece_10a & cong_1_piece_10b
    add(cong_1_piece_10)


solid = part.part
